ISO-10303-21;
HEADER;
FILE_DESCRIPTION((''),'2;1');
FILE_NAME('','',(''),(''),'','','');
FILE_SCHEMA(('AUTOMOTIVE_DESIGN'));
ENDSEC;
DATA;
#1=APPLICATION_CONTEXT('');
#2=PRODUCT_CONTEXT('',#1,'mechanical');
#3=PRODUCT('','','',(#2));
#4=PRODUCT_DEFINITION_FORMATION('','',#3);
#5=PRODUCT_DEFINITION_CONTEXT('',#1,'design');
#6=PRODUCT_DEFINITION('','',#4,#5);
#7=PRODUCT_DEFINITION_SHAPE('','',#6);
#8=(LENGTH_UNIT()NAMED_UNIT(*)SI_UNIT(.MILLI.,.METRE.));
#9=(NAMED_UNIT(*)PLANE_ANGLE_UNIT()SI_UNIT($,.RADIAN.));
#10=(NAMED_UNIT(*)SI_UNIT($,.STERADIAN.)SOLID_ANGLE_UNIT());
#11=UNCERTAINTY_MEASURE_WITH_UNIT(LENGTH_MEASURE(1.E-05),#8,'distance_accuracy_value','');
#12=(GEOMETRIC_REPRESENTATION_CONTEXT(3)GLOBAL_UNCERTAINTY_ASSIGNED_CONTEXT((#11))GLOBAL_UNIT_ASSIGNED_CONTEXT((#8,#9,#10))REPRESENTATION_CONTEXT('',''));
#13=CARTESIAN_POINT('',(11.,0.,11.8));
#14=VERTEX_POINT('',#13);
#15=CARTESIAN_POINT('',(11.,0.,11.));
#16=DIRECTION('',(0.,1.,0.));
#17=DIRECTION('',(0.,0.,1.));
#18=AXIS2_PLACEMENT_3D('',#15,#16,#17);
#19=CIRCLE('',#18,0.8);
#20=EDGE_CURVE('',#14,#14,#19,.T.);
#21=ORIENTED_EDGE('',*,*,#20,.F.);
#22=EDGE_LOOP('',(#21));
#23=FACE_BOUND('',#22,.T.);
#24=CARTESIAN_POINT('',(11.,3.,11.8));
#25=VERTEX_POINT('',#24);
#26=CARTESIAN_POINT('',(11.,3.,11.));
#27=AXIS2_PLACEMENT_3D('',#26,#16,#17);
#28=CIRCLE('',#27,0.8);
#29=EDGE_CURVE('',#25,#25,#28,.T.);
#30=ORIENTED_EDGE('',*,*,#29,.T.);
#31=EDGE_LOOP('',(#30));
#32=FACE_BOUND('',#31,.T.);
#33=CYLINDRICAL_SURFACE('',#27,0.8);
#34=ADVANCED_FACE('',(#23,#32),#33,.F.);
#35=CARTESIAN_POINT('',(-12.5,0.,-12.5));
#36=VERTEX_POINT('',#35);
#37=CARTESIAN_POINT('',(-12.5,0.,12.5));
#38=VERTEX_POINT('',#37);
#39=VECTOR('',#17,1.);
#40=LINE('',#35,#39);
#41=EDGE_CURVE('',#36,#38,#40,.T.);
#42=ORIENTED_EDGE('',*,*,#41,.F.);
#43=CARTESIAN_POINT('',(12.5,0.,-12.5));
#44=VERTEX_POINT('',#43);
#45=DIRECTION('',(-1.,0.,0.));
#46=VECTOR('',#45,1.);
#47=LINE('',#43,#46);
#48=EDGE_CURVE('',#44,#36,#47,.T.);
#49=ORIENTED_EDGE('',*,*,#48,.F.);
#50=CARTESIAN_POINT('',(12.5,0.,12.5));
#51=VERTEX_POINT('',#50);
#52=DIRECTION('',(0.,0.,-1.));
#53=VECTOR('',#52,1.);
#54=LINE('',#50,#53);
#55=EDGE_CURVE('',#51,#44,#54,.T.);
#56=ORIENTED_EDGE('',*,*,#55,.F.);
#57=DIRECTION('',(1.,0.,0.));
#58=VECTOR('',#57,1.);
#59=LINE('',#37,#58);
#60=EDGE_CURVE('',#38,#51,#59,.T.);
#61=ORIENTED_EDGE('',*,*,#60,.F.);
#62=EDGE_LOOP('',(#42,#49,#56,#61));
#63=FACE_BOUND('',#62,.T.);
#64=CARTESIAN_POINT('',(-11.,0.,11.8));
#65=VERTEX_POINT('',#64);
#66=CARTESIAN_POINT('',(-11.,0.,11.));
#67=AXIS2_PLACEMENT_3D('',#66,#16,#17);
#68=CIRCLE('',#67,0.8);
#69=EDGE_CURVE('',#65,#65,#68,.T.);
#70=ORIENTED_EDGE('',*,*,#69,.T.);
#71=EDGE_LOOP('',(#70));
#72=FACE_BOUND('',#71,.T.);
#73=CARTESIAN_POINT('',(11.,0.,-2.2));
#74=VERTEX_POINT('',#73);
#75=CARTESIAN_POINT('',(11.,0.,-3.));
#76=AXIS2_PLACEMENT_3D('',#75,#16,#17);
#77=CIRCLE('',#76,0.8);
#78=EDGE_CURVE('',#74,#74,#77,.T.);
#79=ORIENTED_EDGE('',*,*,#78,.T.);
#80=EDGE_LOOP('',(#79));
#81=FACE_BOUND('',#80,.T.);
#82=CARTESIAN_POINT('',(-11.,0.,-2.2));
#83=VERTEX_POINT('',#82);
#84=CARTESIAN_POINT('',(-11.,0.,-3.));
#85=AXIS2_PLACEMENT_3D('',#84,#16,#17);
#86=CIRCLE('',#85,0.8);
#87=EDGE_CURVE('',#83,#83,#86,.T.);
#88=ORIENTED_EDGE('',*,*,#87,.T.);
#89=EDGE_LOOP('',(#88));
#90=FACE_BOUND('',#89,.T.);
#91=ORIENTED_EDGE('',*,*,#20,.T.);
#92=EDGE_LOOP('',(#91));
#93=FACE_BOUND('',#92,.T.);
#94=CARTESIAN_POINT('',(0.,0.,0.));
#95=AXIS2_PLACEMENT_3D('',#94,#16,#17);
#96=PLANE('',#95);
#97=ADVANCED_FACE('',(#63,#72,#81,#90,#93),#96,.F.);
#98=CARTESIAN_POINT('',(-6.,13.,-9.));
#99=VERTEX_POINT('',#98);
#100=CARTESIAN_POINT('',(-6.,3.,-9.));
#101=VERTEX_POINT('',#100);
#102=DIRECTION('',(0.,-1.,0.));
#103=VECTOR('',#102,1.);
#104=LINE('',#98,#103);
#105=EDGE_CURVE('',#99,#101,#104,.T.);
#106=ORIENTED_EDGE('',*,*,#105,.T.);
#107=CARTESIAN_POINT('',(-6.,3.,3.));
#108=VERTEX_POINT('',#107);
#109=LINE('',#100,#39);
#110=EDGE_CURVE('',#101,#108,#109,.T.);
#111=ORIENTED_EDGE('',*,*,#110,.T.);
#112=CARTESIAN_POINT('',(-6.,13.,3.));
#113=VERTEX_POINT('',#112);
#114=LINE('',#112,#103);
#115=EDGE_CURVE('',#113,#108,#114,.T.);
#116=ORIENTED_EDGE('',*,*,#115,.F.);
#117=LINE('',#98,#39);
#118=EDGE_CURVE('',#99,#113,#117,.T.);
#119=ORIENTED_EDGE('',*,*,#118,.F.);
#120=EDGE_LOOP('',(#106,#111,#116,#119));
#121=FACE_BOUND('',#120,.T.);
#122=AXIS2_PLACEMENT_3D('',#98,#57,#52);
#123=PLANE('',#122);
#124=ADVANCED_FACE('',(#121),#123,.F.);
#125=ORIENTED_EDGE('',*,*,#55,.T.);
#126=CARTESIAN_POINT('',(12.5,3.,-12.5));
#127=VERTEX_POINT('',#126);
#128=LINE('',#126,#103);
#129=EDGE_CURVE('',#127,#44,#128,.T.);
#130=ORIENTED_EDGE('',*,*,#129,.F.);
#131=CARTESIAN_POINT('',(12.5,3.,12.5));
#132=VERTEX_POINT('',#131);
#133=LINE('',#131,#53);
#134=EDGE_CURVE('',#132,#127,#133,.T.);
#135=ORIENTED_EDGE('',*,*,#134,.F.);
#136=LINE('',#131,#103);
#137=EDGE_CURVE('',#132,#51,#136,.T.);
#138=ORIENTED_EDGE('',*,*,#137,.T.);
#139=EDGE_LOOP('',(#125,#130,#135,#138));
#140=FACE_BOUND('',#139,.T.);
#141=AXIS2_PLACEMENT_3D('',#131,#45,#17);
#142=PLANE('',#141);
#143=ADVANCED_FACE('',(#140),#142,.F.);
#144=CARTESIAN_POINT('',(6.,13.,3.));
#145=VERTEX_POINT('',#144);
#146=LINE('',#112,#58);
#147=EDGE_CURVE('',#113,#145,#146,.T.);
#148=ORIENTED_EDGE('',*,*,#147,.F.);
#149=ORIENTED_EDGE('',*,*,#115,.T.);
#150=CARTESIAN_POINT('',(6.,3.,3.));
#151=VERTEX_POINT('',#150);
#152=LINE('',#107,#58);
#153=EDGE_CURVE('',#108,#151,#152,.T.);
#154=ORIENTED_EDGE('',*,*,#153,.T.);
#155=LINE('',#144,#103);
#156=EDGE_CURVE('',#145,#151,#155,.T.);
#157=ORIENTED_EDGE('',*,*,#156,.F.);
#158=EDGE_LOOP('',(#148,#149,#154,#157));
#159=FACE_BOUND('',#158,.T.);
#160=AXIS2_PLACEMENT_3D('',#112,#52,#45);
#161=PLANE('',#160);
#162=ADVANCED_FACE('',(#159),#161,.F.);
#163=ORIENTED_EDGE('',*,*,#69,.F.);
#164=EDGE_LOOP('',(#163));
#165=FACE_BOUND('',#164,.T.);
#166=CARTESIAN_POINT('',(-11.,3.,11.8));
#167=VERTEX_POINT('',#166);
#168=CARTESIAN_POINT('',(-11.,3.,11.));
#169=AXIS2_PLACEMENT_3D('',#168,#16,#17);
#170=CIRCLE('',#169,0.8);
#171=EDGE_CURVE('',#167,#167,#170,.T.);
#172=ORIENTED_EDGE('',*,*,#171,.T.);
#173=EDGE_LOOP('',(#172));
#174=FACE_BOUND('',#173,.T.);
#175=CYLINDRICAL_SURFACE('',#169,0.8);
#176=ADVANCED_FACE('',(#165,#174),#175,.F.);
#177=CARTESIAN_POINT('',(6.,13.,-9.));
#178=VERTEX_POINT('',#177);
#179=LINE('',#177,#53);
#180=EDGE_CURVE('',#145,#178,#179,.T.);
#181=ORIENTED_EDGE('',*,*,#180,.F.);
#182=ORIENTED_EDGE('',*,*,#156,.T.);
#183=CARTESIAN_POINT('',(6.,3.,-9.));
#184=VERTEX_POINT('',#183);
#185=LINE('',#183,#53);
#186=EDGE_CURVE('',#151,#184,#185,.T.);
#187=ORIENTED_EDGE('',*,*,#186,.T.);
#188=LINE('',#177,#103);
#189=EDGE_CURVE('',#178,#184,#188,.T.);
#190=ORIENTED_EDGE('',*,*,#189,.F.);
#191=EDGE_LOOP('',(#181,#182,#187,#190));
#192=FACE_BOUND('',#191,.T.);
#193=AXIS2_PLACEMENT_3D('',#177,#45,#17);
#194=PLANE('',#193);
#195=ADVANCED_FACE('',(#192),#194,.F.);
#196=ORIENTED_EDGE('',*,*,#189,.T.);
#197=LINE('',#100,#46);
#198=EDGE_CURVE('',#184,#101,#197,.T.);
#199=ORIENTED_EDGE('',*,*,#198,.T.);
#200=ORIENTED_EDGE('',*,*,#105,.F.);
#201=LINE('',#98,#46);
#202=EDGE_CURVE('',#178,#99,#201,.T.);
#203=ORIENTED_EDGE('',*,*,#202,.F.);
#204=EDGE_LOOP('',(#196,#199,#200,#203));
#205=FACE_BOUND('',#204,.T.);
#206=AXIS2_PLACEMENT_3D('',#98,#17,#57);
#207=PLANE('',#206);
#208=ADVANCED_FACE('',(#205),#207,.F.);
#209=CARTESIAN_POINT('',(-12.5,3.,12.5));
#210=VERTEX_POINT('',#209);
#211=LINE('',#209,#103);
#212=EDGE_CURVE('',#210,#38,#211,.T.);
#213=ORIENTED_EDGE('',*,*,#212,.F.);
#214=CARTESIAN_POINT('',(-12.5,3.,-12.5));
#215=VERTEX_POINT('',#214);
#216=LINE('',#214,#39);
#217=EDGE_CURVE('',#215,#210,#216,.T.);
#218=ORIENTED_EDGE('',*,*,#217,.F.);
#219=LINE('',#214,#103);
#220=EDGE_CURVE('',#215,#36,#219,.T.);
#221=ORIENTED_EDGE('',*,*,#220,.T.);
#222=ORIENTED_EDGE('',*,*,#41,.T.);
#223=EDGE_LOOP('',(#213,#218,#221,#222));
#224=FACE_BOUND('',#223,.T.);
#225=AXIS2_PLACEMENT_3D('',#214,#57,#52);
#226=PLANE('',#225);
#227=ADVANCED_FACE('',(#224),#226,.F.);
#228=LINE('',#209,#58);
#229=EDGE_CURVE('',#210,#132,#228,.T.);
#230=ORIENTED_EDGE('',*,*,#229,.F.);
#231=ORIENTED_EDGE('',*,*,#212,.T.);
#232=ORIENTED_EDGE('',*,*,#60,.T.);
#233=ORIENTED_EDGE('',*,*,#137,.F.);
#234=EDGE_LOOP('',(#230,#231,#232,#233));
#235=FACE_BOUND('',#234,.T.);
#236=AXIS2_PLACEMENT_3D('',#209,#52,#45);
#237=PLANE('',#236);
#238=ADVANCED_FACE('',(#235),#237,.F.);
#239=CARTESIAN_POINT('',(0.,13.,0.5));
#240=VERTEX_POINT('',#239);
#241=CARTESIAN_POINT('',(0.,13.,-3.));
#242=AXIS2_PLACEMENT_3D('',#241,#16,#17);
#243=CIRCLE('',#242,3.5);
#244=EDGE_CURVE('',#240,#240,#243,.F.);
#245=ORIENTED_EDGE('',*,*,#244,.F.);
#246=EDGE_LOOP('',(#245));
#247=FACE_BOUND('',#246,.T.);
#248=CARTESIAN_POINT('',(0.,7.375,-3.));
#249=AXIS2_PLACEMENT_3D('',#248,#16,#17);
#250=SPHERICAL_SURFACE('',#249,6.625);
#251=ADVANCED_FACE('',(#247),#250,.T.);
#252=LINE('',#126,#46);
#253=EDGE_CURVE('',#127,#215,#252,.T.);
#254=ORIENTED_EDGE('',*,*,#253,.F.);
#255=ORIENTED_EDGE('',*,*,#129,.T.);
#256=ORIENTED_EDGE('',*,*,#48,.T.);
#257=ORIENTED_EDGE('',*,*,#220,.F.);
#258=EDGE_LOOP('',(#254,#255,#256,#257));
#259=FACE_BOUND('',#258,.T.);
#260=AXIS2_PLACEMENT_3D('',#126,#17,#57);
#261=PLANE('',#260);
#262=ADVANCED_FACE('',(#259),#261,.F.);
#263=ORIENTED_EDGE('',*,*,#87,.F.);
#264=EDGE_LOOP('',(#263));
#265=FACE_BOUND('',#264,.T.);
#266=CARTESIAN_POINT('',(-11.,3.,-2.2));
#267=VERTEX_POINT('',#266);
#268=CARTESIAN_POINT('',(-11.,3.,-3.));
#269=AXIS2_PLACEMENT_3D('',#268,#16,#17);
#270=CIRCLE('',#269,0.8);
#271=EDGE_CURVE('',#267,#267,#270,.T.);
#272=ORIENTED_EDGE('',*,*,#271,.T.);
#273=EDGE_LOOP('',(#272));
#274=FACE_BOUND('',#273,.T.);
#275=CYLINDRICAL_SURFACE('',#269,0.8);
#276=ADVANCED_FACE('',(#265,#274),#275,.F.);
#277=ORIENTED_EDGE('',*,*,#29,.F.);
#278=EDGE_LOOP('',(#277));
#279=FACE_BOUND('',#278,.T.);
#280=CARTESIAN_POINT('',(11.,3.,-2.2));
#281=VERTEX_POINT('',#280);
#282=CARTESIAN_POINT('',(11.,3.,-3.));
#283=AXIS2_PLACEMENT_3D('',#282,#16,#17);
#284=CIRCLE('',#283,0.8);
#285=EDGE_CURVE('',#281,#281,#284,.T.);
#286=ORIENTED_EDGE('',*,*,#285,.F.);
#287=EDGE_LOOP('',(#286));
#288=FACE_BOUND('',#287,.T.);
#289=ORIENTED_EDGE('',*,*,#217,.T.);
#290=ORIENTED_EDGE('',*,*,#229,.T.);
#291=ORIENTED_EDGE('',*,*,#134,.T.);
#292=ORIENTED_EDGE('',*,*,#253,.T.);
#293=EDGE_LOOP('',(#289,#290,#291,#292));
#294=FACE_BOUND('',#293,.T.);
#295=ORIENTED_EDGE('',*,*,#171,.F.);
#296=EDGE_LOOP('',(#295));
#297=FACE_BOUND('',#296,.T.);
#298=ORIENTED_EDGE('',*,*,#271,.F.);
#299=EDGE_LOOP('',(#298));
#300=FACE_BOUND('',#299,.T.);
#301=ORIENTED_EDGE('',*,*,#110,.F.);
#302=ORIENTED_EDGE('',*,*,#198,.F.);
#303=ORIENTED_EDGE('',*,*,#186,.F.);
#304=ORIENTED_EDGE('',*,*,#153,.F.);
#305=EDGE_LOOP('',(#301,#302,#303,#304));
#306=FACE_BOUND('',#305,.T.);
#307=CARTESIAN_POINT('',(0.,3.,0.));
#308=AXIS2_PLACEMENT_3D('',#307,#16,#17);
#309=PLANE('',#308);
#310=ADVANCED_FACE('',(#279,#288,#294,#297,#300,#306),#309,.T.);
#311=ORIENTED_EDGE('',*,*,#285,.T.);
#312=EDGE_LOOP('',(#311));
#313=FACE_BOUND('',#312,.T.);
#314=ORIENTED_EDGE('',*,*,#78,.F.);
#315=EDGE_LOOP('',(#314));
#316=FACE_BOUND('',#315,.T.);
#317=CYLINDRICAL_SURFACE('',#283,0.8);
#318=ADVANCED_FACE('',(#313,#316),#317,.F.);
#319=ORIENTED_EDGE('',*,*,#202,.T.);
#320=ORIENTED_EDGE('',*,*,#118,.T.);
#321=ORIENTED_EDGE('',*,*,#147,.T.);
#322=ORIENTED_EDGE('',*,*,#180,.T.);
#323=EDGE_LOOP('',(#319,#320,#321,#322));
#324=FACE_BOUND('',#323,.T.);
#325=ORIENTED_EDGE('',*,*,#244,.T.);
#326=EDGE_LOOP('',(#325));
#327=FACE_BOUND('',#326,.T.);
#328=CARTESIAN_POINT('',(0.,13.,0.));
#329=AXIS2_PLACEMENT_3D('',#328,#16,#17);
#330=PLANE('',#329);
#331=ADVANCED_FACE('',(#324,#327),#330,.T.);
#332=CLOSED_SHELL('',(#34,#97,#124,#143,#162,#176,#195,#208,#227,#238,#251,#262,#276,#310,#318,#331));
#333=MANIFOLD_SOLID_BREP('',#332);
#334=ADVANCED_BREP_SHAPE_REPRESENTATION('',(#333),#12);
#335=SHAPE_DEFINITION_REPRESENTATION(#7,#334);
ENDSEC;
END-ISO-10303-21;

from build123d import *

# Parameters (mm, degrees)
SKETCH1_W             = 25
SKETCH1_H             = 25
BASE_PLATE_DEPTH      = 3
M2X0_4_TAPPED_HOLE1_D = 1.6
SKETCH6_W             = 12
SKETCH6_H             = 12
LENSE_BASE_DEPTH      = 10


# Read off the part's stored shape, not the designer's step: lense
with BuildPart() as part:
    # Sketch1 → base_plate (new body)
    with BuildSketch(Plane(origin=(0, 0, 0), x_dir=(1, 0, 0), z_dir=(0, 1, 0))):
        Rectangle(SKETCH1_W, SKETCH1_H)
    extrude(amount=BASE_PLATE_DEPTH)

    # M2x0.4 Tapped Hole1 (through all)
    with Locations(Plane(origin=(-11, 3, -3), x_dir=(0, 0, 1), z_dir=(0, 1, 0))):
        with Locations((0, 0), (14, 0), (14, 22), (0, 22)):
            Hole(M2X0_4_TAPPED_HOLE1_D / 2)

    # Sketch6 → lense_base (add)
    with BuildSketch(Plane(origin=(0, 3, 0), x_dir=(1, 0, 0), z_dir=(0, 1, 0))):
        with Locations((0, 3)):
            Rectangle(SKETCH6_W, SKETCH6_H)
    extrude(amount=LENSE_BASE_DEPTH)

    # lense outline → lense (revolve)
    with BuildSketch(Plane.XY.offset(-3)):
        with BuildLine():
            Line((0, 12.999999997), (3.500000006, 12.999999997))
            ThreePointArc((3.500000006, 12.999999997), (1.820027476, 13.745096152), (0, 14))
            Line((0, 14), (0, 12.999999997))
        make_face()
    revolve(axis=Axis((0, 0, -3), (0, 1, 0)))


solid = part.part
